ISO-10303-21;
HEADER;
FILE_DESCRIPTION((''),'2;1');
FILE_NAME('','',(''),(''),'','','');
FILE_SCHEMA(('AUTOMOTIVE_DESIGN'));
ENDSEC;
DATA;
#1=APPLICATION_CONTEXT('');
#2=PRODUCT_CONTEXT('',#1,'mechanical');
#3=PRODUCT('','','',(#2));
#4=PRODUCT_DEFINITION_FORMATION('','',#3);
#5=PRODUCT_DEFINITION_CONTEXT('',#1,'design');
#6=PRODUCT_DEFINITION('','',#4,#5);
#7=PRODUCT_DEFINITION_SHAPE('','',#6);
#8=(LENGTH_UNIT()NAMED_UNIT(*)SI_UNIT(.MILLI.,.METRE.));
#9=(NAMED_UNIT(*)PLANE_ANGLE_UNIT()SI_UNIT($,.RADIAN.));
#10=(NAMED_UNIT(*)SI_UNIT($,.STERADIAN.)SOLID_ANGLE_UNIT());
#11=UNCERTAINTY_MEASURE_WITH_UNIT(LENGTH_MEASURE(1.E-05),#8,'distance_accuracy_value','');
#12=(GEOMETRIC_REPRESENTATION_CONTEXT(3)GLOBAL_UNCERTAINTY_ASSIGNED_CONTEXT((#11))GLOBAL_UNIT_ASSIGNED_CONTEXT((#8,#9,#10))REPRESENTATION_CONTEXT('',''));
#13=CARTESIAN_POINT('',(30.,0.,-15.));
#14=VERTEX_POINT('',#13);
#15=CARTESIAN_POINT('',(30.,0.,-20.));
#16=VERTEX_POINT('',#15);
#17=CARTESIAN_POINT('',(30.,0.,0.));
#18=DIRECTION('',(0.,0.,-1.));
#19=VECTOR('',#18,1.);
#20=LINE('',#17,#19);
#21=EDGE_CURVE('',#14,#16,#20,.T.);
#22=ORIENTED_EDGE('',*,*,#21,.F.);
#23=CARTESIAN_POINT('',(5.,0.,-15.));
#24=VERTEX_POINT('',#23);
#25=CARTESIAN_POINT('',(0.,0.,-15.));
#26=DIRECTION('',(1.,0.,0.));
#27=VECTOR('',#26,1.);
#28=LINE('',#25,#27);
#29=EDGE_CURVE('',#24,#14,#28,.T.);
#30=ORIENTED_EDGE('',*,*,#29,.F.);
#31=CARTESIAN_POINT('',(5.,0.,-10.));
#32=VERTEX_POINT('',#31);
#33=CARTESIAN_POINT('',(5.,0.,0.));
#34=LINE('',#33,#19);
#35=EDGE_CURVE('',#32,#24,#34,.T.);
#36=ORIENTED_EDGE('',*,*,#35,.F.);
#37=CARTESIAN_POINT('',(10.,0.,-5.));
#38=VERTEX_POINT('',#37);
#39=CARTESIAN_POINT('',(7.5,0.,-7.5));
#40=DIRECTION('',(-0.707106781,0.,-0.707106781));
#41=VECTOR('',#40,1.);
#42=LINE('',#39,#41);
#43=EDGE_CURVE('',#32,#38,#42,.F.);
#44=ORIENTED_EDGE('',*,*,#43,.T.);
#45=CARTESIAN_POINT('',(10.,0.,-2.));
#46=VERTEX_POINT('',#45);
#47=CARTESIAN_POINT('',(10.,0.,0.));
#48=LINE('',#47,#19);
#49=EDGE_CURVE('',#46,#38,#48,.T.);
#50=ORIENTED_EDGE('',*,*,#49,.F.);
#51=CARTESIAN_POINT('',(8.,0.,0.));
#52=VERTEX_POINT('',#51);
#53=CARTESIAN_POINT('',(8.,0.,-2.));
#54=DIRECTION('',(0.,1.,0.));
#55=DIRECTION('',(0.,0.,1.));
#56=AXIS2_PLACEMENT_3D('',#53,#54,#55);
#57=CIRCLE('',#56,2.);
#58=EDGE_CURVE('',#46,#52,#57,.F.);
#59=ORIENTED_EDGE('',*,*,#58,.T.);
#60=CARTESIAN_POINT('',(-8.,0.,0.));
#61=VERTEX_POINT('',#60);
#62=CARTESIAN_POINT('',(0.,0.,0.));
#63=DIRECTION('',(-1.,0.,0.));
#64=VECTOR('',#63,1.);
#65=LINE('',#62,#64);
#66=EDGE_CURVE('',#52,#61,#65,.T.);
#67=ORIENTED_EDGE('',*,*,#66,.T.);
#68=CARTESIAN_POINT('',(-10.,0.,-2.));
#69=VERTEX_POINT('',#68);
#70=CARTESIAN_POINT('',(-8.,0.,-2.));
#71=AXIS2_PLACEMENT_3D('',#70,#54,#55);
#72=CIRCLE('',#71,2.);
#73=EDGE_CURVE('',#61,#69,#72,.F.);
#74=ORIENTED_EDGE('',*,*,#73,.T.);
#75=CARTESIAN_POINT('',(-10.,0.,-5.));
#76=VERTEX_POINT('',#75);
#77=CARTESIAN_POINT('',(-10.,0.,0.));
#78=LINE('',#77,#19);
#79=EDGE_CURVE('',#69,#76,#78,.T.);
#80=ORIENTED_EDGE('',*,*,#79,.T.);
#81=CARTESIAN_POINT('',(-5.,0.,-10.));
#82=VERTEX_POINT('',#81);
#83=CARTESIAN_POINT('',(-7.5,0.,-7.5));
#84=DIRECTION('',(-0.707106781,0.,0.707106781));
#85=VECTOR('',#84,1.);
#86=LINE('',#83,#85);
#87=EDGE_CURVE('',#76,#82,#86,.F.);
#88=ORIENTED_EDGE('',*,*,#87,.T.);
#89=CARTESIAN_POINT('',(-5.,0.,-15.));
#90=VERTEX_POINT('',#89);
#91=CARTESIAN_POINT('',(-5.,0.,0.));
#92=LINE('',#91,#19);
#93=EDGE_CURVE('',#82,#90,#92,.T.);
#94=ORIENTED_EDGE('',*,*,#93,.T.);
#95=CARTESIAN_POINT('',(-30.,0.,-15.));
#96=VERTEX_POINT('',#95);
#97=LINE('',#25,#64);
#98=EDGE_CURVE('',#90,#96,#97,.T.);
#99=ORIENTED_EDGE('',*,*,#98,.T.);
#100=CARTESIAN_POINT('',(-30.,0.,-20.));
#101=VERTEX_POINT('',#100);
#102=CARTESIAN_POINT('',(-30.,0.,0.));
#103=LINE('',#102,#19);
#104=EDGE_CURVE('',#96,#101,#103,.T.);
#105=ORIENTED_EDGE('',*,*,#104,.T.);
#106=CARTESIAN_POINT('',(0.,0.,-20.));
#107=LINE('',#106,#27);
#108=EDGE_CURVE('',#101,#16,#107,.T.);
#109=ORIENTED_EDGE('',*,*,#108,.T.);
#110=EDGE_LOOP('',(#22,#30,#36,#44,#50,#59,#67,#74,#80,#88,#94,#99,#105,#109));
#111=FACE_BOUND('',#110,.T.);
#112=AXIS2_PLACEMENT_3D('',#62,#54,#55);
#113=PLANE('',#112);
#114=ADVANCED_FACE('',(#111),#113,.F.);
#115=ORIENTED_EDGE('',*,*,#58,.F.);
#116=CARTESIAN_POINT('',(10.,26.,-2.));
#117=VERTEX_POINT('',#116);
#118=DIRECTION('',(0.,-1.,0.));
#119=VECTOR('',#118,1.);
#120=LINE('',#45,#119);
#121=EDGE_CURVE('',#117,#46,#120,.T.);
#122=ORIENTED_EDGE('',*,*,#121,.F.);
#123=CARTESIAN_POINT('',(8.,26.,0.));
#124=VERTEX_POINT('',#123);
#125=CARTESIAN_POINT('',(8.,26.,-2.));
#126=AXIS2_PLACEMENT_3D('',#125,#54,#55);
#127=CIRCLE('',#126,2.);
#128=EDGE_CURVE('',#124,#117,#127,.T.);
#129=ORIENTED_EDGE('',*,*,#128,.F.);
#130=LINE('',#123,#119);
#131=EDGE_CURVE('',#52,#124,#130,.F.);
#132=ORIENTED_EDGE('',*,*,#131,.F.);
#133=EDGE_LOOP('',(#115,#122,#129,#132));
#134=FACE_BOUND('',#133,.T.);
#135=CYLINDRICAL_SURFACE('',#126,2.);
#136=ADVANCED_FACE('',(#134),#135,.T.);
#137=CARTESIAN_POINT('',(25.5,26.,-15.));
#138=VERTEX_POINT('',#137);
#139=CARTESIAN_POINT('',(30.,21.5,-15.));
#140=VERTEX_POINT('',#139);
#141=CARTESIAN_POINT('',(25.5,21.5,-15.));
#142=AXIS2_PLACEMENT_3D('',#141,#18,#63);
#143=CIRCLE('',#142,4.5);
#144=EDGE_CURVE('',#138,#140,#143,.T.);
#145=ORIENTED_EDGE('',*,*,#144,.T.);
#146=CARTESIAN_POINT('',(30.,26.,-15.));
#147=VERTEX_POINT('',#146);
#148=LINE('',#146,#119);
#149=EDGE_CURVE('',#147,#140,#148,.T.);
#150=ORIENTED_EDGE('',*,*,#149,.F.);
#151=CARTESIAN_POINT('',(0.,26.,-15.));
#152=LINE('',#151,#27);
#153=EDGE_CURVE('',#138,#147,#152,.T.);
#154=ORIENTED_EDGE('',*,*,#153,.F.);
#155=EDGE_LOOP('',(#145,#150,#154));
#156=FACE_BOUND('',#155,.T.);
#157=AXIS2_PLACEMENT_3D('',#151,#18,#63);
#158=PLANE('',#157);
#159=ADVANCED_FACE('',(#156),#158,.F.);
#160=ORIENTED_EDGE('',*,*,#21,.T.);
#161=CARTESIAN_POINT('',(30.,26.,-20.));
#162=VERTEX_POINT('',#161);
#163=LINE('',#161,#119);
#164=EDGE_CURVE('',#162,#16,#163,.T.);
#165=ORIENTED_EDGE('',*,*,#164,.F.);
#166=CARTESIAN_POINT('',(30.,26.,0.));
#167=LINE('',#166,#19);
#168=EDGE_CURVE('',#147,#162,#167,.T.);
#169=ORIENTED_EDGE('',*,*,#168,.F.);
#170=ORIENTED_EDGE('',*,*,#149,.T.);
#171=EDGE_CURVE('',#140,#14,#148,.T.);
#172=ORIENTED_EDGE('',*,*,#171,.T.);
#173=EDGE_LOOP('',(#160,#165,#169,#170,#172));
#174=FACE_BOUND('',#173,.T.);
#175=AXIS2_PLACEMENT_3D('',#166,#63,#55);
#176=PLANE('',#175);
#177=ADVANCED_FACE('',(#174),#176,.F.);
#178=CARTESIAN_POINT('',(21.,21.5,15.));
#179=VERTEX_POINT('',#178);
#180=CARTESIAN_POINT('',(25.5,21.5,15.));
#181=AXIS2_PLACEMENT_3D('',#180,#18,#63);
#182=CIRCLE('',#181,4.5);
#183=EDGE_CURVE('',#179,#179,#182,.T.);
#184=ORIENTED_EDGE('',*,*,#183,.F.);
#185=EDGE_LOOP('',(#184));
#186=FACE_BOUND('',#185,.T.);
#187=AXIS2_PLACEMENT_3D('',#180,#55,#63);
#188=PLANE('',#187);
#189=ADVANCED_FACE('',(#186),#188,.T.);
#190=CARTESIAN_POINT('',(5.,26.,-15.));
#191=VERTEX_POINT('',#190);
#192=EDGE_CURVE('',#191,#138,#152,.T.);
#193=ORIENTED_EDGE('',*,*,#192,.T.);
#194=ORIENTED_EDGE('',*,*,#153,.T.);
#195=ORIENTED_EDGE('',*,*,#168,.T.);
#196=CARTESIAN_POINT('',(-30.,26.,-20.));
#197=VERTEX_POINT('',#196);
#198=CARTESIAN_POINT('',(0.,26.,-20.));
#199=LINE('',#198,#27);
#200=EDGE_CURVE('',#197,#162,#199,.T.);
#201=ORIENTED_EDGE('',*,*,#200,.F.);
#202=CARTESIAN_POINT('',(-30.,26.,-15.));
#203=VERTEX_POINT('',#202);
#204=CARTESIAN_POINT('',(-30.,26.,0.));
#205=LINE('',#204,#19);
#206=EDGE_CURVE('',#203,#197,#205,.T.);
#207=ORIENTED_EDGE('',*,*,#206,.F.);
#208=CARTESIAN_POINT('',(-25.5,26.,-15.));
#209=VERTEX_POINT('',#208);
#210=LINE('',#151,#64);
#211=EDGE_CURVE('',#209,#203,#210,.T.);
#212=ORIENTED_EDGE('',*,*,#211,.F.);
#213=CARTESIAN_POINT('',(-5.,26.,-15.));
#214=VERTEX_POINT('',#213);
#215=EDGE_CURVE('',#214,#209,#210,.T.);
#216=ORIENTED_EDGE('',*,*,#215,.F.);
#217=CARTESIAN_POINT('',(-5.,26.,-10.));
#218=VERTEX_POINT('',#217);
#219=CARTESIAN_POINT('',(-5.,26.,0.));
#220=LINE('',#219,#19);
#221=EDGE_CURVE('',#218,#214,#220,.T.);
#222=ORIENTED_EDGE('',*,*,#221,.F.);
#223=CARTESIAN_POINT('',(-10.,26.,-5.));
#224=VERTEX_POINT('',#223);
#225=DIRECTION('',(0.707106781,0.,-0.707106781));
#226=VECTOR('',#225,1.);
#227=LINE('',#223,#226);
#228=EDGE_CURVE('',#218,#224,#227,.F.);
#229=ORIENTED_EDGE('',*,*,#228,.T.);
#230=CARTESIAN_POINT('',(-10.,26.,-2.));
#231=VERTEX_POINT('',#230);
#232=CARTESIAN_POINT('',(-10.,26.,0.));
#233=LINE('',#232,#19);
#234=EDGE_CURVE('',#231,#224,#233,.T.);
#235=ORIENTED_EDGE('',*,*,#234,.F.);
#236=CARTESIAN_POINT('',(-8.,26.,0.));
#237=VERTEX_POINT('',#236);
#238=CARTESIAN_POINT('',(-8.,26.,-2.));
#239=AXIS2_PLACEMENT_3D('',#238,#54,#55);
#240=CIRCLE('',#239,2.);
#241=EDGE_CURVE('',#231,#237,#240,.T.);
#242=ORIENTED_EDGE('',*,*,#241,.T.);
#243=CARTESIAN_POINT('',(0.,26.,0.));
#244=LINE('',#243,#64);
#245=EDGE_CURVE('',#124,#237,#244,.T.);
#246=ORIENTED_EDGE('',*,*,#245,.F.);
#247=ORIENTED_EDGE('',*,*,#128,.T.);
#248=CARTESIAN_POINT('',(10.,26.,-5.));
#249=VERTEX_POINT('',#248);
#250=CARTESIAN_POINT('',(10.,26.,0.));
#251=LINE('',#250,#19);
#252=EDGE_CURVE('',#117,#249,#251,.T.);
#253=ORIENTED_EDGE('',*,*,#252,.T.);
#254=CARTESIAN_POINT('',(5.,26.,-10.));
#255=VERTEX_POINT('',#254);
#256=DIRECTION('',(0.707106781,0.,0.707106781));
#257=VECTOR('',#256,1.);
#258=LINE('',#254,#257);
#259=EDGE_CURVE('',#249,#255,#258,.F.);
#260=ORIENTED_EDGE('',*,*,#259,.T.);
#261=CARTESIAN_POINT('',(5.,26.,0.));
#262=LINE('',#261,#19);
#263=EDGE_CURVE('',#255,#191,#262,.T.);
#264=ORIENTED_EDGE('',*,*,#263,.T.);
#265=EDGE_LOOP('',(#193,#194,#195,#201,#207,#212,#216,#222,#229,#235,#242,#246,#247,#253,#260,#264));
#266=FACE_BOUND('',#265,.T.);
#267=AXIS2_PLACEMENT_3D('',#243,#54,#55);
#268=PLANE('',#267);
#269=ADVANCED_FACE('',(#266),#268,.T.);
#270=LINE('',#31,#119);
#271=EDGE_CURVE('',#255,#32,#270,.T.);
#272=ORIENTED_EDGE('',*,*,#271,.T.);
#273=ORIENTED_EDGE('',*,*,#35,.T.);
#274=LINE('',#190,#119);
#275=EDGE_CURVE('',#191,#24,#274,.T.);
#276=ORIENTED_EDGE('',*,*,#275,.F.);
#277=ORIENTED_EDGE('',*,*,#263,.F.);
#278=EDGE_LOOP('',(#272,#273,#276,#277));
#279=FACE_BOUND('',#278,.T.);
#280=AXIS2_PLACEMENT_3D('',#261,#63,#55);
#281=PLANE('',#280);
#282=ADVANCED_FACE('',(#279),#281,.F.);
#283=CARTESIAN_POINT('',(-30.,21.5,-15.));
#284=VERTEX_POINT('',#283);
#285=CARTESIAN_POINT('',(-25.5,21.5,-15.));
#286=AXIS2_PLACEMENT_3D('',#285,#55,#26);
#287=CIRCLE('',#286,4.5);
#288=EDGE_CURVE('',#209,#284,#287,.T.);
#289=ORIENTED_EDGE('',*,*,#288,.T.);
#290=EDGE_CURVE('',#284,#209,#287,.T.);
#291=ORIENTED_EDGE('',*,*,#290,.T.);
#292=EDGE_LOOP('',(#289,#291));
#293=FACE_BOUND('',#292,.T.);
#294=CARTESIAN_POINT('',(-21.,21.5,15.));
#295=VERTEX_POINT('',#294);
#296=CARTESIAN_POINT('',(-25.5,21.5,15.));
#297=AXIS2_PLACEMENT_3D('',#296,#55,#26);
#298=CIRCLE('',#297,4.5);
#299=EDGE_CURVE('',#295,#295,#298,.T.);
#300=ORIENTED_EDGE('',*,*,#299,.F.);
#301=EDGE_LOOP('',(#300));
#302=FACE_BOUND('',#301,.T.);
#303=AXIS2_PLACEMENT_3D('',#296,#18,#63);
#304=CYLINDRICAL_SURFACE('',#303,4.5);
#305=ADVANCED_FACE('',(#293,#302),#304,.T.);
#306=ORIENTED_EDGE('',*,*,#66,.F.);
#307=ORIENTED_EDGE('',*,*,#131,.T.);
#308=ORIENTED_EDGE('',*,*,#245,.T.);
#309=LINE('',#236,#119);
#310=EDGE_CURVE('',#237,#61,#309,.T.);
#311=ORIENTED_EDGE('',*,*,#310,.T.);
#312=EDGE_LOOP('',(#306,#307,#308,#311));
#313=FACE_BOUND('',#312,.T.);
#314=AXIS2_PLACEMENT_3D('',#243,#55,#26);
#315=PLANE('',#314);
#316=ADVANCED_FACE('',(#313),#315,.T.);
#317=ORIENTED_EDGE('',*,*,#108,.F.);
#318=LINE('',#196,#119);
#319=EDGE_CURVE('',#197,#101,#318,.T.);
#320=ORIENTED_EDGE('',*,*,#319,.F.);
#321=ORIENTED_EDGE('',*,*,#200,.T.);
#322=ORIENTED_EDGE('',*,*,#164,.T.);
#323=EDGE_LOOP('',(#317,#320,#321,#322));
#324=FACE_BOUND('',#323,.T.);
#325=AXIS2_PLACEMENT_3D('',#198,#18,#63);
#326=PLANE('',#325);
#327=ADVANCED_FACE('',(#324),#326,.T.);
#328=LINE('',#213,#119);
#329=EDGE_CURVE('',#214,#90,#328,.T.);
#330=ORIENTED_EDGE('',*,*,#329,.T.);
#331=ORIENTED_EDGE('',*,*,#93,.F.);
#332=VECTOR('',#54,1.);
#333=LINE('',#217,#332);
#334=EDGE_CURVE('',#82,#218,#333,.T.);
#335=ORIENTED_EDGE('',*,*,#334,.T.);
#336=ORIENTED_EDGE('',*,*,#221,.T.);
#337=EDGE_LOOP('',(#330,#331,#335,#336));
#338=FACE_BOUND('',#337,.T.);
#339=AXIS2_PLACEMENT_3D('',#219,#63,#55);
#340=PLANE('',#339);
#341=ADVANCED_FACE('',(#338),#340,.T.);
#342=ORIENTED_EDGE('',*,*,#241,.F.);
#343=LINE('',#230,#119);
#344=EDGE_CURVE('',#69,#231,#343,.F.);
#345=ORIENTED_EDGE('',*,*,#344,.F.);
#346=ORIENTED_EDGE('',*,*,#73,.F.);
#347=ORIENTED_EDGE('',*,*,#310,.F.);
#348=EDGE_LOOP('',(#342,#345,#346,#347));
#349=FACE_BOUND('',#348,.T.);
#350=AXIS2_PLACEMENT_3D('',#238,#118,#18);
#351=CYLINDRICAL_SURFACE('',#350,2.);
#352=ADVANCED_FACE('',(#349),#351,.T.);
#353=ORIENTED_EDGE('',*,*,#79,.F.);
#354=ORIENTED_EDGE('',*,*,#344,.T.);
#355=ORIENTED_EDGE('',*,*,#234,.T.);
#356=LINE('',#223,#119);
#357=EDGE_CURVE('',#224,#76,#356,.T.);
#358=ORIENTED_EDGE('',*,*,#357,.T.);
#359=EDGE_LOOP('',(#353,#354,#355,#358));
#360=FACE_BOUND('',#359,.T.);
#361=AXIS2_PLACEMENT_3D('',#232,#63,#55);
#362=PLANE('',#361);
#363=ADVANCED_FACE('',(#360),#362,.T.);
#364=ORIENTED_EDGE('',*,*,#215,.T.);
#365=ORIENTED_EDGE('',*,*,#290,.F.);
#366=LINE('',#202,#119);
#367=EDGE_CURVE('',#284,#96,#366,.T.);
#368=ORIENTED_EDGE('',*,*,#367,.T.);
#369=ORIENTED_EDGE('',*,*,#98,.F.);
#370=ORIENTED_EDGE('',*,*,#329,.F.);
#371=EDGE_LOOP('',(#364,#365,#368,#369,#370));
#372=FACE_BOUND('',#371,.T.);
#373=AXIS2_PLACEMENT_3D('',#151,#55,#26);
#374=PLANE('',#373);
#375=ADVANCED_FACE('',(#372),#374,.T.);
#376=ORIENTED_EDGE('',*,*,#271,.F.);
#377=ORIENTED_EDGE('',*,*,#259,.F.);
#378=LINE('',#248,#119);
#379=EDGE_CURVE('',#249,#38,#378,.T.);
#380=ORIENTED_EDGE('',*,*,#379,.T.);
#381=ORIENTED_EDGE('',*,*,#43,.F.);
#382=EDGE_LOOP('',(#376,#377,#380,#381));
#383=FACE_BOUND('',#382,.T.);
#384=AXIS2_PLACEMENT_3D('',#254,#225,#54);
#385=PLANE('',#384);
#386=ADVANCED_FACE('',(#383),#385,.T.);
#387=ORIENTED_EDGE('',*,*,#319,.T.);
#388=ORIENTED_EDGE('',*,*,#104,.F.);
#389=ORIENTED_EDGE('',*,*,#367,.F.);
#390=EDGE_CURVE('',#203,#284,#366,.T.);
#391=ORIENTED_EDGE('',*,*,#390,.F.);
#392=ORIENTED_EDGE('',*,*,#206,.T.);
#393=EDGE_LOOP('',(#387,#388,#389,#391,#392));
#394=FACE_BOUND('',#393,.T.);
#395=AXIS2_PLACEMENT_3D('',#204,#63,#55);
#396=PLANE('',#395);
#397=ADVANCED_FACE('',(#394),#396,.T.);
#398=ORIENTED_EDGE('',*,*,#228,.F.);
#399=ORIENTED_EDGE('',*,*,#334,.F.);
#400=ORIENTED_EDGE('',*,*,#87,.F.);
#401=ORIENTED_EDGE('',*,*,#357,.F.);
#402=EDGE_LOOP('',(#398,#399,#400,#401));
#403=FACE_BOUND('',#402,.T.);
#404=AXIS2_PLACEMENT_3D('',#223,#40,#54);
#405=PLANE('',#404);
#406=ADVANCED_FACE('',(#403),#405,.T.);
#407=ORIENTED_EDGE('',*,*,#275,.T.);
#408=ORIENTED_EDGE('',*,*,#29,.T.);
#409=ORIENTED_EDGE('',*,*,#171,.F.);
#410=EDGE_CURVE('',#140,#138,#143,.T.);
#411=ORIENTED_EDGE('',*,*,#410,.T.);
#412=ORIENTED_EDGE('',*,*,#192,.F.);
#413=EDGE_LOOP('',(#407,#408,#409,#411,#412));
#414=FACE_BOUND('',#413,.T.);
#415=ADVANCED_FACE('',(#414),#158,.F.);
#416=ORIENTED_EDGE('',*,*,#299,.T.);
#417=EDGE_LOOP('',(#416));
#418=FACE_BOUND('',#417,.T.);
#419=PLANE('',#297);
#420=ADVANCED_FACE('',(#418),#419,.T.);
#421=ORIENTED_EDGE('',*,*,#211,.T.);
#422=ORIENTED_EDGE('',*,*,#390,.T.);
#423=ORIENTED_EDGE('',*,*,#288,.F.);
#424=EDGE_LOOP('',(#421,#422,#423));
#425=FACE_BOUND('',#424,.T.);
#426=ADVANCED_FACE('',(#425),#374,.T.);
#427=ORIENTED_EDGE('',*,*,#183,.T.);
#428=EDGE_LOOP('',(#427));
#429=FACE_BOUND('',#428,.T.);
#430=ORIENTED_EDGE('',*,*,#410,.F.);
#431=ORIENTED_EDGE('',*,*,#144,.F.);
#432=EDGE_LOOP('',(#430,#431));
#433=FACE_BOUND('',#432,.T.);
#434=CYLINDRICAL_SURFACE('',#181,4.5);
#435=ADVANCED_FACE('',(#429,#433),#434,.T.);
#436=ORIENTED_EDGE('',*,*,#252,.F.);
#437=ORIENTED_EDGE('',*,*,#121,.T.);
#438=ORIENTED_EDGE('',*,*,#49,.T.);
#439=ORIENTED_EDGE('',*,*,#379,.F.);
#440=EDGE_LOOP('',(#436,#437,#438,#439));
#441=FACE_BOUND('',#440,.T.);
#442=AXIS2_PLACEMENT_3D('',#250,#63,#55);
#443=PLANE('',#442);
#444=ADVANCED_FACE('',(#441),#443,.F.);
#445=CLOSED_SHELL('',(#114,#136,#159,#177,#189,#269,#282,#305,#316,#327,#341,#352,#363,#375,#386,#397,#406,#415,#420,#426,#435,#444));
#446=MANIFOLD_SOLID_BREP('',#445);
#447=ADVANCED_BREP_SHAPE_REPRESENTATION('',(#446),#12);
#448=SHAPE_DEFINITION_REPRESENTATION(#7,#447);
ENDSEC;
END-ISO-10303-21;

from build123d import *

# Parameters (mm, degrees)
BOSS_EXTRUDE1_DEPTH = 26
SKETCH2_R           = 4.5
BOSS_EXTRUDE2_DEPTH = 30
FILLET1_R           = 2
CHAMFER1_SIZE       = 5


with BuildPart() as part:
    # Sketch1 → Boss-Extrude1 (new body)
    with BuildSketch(Plane(origin=(0, 0, 0), x_dir=(1, 0, 0), z_dir=(0, 1, 0))):
        Polygon((-10, 0), (0, 0), (0, 20), (-30, 20), (-30, 15), (-5, 15), (-5, 5), (-10, 5), align=None)
        Polygon((0, 0), (10, 0), (10, 5), (5, 5), (5, 15), (30, 15), (30, 20), (0, 20), align=None)
    extrude(amount=BOSS_EXTRUDE1_DEPTH)

    # Sketch2 → Boss-Extrude2 (add)
    with BuildSketch(Plane.XY.offset(-15)):
        with Locations(Location((-25.5, 21.5, 0), (0, 0, 180))):
            Circle(SKETCH2_R)
    boss_extrude2 = extrude(amount=BOSS_EXTRUDE2_DEPTH)

    # Mirror1: Boss-Extrude2 across plane
    add(boss_extrude2.mirror(Plane(origin=(0, 0, 0), x_dir=(0, 0, 1), z_dir=(1, 0, 0))))

    # Fillet1
    fillet1_edges = [part.edges().sort_by_distance(p)[0] for p in [
        (-10, 13, 0),
        (10, 13, 0),
    ]]
    fillet(fillet1_edges, radius=FILLET1_R)

    # Chamfer1
    chamfer1_edges = [part.edges().sort_by_distance(p)[0] for p in [
        (5, 13, -5),
        (-5, 13, -5),
    ]]
    chamfer(chamfer1_edges, length=CHAMFER1_SIZE - 0.0001)  # a hair under: the kernel refuses the full size


solid = part.part
